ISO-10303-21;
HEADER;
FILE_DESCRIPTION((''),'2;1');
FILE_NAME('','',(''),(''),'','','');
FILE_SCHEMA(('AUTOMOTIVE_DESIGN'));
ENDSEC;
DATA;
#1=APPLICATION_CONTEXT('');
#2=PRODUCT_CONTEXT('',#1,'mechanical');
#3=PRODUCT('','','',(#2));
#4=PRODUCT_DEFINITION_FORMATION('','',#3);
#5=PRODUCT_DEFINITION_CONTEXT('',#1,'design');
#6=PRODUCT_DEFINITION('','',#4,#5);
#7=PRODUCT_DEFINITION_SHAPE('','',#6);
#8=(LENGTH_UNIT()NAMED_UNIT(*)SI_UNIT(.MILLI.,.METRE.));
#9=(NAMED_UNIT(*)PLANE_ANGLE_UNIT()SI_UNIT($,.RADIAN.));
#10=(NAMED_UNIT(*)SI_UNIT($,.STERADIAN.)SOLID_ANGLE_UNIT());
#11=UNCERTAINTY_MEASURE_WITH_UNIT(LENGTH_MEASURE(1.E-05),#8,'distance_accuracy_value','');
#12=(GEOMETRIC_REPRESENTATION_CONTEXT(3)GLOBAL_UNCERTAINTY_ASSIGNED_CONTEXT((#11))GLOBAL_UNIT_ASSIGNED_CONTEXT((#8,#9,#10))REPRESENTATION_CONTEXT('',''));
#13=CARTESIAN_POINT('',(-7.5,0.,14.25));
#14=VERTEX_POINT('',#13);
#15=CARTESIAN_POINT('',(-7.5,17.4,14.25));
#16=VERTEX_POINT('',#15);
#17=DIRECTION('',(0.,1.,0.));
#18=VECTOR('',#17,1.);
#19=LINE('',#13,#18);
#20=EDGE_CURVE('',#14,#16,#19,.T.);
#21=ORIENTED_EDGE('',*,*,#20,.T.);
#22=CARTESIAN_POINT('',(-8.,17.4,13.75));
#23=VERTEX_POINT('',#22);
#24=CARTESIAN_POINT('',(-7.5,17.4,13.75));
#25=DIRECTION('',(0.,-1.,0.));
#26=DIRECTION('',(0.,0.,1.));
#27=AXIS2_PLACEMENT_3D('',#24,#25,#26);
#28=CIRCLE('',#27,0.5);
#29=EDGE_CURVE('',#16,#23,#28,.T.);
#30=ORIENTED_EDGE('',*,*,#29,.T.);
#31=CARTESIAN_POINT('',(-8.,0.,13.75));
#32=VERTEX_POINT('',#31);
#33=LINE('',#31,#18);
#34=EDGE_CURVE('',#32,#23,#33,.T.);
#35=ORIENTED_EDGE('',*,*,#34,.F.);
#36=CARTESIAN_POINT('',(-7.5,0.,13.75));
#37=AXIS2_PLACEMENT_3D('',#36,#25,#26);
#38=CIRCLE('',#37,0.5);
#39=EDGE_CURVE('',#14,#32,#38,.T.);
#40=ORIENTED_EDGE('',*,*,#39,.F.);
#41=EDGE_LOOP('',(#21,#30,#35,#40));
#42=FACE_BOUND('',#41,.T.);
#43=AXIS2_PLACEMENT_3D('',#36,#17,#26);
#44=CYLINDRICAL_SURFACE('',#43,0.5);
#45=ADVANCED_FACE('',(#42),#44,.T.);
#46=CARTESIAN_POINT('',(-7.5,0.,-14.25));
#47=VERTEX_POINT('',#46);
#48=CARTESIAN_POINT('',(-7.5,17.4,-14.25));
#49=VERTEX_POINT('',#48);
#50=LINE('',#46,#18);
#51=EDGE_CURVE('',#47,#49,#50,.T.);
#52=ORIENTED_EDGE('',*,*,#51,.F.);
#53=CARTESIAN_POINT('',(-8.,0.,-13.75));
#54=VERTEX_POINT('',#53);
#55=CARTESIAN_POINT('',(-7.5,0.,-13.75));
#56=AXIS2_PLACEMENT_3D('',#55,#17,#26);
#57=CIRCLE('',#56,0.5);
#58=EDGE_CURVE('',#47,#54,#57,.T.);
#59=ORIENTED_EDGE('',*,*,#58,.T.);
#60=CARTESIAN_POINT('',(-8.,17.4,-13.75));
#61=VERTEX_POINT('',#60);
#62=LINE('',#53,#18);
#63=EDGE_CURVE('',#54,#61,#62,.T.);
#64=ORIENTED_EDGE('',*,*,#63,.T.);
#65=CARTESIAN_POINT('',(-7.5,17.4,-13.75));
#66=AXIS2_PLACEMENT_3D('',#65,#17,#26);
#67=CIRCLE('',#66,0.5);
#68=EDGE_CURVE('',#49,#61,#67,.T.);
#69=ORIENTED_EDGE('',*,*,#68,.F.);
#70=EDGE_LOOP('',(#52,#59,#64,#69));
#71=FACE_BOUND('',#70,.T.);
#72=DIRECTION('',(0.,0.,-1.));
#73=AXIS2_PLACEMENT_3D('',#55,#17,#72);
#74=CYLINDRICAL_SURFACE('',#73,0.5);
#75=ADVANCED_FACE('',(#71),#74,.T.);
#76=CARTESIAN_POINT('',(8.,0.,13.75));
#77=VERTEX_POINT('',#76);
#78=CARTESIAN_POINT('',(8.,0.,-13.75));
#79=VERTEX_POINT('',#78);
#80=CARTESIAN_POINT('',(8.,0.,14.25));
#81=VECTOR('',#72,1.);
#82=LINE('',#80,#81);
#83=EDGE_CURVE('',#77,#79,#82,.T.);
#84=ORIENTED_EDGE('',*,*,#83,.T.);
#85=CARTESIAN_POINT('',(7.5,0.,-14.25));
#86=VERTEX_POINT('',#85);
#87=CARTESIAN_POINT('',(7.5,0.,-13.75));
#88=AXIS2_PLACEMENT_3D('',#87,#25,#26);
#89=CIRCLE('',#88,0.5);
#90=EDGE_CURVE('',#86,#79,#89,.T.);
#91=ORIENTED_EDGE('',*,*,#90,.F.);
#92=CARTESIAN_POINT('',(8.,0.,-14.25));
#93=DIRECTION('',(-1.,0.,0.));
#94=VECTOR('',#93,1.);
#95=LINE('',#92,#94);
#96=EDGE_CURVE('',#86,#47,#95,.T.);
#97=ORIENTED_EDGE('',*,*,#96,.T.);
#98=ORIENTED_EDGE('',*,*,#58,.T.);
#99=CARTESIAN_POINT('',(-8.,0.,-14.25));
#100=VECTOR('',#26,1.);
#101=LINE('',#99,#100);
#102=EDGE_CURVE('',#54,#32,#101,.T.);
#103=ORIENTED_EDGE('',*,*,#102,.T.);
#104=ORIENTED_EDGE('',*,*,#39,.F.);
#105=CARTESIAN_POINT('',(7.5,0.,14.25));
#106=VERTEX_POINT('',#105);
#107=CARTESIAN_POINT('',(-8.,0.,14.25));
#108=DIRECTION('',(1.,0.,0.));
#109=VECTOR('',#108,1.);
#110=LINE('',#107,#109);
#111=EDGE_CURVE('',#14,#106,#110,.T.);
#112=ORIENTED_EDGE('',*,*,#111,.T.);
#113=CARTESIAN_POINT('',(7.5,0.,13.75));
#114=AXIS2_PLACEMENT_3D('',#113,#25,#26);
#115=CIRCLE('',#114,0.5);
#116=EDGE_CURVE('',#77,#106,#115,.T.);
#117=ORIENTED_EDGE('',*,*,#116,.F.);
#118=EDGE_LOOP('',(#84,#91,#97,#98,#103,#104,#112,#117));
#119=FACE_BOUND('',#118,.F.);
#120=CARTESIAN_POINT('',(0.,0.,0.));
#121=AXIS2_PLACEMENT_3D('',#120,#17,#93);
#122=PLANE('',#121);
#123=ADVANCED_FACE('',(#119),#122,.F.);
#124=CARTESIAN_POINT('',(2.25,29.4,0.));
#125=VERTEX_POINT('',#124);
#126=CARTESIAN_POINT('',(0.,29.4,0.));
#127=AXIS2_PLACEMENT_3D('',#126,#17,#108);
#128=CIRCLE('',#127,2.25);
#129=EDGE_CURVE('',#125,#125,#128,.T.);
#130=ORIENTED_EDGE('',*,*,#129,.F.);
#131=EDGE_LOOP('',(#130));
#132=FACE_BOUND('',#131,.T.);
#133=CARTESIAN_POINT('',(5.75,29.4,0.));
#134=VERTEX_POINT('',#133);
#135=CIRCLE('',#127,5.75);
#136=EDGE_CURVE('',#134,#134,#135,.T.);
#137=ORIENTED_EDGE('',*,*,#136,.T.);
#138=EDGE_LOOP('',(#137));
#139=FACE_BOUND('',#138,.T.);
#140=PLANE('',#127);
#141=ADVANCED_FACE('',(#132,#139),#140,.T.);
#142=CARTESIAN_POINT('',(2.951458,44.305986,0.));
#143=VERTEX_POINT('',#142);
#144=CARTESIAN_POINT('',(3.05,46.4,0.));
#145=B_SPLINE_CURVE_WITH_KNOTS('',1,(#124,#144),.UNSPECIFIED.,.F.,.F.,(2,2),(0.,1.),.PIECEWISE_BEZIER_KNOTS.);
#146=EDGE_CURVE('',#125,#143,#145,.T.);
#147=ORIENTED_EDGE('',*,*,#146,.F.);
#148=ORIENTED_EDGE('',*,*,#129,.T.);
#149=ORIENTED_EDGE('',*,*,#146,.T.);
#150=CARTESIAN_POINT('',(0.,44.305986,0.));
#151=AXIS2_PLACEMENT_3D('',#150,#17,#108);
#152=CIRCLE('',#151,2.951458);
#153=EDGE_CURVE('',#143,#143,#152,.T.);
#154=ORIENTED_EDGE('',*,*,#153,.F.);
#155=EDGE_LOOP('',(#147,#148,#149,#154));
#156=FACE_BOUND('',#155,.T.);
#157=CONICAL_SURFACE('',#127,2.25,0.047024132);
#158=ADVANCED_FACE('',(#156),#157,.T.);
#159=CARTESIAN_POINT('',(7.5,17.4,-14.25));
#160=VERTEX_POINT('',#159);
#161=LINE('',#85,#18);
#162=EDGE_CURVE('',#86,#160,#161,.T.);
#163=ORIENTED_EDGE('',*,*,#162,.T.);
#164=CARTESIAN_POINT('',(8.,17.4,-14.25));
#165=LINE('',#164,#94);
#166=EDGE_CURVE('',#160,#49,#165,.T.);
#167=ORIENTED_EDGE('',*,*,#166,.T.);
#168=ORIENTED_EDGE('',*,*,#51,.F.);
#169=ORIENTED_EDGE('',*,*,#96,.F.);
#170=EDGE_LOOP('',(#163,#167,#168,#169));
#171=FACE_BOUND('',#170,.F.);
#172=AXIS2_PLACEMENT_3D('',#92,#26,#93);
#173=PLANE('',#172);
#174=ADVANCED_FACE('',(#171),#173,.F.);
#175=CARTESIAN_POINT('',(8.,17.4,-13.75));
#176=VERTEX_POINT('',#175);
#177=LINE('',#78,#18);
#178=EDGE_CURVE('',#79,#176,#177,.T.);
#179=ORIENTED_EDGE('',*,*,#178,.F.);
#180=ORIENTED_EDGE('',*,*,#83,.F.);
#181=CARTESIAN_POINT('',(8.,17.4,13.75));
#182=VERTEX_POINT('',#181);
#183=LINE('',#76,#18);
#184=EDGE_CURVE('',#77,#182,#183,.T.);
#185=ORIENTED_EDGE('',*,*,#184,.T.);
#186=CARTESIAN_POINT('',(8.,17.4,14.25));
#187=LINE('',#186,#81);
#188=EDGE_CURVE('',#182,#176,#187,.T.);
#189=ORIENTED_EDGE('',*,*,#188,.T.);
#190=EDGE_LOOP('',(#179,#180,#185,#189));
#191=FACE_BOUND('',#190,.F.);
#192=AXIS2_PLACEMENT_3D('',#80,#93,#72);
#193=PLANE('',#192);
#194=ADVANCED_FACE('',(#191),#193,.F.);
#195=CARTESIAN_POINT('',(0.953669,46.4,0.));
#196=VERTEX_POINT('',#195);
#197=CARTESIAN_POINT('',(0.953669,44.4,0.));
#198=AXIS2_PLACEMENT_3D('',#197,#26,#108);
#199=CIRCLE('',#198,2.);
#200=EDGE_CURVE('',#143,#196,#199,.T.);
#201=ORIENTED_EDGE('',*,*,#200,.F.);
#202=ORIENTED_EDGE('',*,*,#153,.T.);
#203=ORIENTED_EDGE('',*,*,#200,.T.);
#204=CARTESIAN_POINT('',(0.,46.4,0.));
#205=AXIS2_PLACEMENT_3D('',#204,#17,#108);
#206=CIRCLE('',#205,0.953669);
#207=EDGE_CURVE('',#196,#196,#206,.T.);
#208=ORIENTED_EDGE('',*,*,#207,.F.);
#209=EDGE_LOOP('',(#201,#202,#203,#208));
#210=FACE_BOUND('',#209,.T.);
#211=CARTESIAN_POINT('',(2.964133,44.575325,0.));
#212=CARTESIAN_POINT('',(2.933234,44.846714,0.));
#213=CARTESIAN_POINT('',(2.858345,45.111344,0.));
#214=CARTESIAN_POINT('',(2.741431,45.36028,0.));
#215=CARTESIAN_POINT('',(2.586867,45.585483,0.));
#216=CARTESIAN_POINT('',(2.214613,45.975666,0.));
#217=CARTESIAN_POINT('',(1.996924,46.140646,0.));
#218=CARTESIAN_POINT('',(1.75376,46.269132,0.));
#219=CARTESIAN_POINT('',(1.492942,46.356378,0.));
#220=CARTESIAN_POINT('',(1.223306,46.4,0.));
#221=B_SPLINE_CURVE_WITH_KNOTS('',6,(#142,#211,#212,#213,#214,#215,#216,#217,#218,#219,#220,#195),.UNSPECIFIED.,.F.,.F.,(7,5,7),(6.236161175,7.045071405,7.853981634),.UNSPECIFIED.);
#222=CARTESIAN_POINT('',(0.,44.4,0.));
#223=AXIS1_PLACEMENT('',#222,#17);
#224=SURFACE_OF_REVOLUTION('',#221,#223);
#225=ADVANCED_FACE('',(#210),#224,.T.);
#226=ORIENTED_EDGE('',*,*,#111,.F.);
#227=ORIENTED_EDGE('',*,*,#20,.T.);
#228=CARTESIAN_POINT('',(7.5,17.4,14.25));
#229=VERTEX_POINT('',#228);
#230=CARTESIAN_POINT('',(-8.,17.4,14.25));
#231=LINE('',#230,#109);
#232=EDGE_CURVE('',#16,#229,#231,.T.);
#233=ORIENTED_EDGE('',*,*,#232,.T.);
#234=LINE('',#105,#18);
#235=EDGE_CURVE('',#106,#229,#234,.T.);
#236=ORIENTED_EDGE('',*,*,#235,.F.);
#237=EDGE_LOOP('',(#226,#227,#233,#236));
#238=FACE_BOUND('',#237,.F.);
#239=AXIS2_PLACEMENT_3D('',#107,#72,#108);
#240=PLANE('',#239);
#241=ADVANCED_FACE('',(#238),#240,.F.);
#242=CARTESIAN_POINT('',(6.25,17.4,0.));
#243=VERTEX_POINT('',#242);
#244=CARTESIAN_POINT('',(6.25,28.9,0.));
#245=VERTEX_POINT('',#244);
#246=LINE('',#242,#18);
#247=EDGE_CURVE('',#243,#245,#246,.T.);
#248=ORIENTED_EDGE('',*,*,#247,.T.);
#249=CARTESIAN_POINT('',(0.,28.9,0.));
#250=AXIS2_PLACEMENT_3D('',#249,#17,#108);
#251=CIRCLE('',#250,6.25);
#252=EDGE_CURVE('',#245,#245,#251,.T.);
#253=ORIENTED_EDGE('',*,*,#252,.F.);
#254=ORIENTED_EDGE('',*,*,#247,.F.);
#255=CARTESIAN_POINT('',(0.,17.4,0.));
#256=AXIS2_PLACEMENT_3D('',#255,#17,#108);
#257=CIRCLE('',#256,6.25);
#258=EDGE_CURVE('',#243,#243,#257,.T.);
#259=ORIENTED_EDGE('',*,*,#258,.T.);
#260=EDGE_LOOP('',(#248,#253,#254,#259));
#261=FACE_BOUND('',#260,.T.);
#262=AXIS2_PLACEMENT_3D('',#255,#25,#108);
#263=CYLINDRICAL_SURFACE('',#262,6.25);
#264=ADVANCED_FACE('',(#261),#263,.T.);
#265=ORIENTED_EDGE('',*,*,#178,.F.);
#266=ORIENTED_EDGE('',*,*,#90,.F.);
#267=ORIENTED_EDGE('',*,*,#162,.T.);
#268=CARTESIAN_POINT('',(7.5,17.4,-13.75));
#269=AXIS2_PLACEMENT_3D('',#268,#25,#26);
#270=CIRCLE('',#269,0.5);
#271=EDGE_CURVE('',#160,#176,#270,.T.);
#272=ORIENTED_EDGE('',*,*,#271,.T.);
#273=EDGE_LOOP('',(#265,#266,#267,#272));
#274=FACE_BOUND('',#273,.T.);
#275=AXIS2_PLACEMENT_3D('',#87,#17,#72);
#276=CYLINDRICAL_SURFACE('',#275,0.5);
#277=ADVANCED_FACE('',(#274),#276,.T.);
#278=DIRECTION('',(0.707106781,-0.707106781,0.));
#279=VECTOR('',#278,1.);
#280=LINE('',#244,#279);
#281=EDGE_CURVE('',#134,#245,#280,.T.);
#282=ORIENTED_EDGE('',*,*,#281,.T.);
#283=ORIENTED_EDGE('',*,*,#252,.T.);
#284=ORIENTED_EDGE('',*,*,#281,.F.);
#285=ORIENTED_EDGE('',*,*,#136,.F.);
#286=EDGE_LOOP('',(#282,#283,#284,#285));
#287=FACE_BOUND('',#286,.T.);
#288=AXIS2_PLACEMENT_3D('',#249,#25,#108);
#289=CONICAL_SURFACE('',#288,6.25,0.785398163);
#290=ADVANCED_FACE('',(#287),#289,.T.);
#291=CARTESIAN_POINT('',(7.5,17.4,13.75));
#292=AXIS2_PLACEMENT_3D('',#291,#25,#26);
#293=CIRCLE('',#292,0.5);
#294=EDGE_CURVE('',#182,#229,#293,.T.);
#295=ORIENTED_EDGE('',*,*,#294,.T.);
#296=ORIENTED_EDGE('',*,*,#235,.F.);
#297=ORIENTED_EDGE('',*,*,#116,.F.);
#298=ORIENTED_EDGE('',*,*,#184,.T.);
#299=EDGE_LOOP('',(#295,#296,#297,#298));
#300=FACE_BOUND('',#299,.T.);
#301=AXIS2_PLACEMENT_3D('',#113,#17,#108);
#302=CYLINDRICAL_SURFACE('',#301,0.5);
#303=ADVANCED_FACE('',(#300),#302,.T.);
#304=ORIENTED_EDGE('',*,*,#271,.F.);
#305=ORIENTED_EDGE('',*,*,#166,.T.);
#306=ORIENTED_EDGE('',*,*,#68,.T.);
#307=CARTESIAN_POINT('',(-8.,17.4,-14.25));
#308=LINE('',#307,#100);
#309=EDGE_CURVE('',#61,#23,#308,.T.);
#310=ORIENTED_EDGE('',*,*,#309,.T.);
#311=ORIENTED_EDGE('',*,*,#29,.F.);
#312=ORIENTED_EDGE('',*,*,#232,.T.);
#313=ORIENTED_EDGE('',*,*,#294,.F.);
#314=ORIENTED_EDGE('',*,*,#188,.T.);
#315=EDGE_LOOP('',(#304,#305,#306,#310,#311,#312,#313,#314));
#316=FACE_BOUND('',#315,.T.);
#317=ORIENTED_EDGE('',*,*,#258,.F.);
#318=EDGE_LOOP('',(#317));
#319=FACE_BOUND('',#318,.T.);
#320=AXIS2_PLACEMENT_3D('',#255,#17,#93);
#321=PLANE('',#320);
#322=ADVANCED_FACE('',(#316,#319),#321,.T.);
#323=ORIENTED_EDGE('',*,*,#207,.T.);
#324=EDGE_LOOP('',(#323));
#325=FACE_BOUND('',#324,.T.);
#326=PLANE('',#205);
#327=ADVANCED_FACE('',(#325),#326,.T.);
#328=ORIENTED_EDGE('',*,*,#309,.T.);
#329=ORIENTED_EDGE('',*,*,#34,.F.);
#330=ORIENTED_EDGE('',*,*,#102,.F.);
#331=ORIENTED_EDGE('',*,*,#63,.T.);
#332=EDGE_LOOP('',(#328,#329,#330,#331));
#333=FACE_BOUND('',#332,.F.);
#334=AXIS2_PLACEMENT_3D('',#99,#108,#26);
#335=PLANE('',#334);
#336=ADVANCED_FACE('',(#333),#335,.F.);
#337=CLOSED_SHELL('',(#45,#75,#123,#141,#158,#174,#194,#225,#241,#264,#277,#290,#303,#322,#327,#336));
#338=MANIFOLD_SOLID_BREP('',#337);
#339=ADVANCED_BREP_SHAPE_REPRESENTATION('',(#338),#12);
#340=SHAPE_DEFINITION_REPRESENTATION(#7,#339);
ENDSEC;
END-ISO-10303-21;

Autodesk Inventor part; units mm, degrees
ref_plane "YZ Plane" through (0, 0, 0) normal (1, 0, 0) x (0, 1, 0)
ref_plane "XZ Plane" through (0, 0, 0) normal (0, 1, 0) x (-1, 0, 0)
sketch "Sketch1" plane through (0, 0, 0) normal (0, 1, 0) x (-1, 0, 0)
  line L0 (8, -14.25) -> (8, 14.25)
  line L1 (8, 14.25) -> (-8, 14.25)
  line L2 (-8, 14.25) -> (-8, -14.25)
  line L3 (-8, -14.25) -> (8, -14.25)
  line L4 (8, -14.25) -> (-8, 14.25) construction
  line L5 (8, 14.25) -> (-8, -14.25) construction
  point P0 (0, 0)
  dimension "d0" = 28.5
  dimension "d1" = 16
extrude "Extrusion1" add sketch "Sketch1" along normal blind 17.4
fillet "Fillet1" radius 0.5 4 edges at (-8, 8.7, 14.25) (8, 8.7, 14.25) (8, 8.7, -14.25) (-8, 8.7, -14.25)
sketch "Sketch2" plane through (0, 17.4, 0) normal (0, 1, 0) x (1, 0, 0)
  circle A0 centre (0, 0) radius 6.25
  dimension "d5" = 12.5
extrude "Extrusion2" add sketch "Sketch2" along normal blind 12
sketch "Sketch3" plane through (0, 29.4, 0) normal (0, 1, 0) x (1, 0, 0)
  circle A0 centre (0, 0) radius 2.25
  dimension "d8" = 4.5
ref_plane "Work Plane1" through (0, 46.4, 0) normal (0, 1, 0) x (1, 0, 0)
sketch "Sketch4" plane through (0, 46.4, 0) normal (0, 1, 0) x (1, 0, 0)
  circle A0 centre (0, 0) radius 3.05
  dimension "d10" = 6.1
loft "Loft1" add profiles "Sketch3", "Sketch4"
fillet "Fillet2" radius 2 1 edges at (-3.05, 46.4, 0)
chamfer "Chamfer1" distance 0.5 angle 45 1 edges at (-6.25, 29.4, 0)
thread "Thread2" size "M14x2" class "6g" standard "ANSI Metric M Profile" full length
properties part number "switch"
